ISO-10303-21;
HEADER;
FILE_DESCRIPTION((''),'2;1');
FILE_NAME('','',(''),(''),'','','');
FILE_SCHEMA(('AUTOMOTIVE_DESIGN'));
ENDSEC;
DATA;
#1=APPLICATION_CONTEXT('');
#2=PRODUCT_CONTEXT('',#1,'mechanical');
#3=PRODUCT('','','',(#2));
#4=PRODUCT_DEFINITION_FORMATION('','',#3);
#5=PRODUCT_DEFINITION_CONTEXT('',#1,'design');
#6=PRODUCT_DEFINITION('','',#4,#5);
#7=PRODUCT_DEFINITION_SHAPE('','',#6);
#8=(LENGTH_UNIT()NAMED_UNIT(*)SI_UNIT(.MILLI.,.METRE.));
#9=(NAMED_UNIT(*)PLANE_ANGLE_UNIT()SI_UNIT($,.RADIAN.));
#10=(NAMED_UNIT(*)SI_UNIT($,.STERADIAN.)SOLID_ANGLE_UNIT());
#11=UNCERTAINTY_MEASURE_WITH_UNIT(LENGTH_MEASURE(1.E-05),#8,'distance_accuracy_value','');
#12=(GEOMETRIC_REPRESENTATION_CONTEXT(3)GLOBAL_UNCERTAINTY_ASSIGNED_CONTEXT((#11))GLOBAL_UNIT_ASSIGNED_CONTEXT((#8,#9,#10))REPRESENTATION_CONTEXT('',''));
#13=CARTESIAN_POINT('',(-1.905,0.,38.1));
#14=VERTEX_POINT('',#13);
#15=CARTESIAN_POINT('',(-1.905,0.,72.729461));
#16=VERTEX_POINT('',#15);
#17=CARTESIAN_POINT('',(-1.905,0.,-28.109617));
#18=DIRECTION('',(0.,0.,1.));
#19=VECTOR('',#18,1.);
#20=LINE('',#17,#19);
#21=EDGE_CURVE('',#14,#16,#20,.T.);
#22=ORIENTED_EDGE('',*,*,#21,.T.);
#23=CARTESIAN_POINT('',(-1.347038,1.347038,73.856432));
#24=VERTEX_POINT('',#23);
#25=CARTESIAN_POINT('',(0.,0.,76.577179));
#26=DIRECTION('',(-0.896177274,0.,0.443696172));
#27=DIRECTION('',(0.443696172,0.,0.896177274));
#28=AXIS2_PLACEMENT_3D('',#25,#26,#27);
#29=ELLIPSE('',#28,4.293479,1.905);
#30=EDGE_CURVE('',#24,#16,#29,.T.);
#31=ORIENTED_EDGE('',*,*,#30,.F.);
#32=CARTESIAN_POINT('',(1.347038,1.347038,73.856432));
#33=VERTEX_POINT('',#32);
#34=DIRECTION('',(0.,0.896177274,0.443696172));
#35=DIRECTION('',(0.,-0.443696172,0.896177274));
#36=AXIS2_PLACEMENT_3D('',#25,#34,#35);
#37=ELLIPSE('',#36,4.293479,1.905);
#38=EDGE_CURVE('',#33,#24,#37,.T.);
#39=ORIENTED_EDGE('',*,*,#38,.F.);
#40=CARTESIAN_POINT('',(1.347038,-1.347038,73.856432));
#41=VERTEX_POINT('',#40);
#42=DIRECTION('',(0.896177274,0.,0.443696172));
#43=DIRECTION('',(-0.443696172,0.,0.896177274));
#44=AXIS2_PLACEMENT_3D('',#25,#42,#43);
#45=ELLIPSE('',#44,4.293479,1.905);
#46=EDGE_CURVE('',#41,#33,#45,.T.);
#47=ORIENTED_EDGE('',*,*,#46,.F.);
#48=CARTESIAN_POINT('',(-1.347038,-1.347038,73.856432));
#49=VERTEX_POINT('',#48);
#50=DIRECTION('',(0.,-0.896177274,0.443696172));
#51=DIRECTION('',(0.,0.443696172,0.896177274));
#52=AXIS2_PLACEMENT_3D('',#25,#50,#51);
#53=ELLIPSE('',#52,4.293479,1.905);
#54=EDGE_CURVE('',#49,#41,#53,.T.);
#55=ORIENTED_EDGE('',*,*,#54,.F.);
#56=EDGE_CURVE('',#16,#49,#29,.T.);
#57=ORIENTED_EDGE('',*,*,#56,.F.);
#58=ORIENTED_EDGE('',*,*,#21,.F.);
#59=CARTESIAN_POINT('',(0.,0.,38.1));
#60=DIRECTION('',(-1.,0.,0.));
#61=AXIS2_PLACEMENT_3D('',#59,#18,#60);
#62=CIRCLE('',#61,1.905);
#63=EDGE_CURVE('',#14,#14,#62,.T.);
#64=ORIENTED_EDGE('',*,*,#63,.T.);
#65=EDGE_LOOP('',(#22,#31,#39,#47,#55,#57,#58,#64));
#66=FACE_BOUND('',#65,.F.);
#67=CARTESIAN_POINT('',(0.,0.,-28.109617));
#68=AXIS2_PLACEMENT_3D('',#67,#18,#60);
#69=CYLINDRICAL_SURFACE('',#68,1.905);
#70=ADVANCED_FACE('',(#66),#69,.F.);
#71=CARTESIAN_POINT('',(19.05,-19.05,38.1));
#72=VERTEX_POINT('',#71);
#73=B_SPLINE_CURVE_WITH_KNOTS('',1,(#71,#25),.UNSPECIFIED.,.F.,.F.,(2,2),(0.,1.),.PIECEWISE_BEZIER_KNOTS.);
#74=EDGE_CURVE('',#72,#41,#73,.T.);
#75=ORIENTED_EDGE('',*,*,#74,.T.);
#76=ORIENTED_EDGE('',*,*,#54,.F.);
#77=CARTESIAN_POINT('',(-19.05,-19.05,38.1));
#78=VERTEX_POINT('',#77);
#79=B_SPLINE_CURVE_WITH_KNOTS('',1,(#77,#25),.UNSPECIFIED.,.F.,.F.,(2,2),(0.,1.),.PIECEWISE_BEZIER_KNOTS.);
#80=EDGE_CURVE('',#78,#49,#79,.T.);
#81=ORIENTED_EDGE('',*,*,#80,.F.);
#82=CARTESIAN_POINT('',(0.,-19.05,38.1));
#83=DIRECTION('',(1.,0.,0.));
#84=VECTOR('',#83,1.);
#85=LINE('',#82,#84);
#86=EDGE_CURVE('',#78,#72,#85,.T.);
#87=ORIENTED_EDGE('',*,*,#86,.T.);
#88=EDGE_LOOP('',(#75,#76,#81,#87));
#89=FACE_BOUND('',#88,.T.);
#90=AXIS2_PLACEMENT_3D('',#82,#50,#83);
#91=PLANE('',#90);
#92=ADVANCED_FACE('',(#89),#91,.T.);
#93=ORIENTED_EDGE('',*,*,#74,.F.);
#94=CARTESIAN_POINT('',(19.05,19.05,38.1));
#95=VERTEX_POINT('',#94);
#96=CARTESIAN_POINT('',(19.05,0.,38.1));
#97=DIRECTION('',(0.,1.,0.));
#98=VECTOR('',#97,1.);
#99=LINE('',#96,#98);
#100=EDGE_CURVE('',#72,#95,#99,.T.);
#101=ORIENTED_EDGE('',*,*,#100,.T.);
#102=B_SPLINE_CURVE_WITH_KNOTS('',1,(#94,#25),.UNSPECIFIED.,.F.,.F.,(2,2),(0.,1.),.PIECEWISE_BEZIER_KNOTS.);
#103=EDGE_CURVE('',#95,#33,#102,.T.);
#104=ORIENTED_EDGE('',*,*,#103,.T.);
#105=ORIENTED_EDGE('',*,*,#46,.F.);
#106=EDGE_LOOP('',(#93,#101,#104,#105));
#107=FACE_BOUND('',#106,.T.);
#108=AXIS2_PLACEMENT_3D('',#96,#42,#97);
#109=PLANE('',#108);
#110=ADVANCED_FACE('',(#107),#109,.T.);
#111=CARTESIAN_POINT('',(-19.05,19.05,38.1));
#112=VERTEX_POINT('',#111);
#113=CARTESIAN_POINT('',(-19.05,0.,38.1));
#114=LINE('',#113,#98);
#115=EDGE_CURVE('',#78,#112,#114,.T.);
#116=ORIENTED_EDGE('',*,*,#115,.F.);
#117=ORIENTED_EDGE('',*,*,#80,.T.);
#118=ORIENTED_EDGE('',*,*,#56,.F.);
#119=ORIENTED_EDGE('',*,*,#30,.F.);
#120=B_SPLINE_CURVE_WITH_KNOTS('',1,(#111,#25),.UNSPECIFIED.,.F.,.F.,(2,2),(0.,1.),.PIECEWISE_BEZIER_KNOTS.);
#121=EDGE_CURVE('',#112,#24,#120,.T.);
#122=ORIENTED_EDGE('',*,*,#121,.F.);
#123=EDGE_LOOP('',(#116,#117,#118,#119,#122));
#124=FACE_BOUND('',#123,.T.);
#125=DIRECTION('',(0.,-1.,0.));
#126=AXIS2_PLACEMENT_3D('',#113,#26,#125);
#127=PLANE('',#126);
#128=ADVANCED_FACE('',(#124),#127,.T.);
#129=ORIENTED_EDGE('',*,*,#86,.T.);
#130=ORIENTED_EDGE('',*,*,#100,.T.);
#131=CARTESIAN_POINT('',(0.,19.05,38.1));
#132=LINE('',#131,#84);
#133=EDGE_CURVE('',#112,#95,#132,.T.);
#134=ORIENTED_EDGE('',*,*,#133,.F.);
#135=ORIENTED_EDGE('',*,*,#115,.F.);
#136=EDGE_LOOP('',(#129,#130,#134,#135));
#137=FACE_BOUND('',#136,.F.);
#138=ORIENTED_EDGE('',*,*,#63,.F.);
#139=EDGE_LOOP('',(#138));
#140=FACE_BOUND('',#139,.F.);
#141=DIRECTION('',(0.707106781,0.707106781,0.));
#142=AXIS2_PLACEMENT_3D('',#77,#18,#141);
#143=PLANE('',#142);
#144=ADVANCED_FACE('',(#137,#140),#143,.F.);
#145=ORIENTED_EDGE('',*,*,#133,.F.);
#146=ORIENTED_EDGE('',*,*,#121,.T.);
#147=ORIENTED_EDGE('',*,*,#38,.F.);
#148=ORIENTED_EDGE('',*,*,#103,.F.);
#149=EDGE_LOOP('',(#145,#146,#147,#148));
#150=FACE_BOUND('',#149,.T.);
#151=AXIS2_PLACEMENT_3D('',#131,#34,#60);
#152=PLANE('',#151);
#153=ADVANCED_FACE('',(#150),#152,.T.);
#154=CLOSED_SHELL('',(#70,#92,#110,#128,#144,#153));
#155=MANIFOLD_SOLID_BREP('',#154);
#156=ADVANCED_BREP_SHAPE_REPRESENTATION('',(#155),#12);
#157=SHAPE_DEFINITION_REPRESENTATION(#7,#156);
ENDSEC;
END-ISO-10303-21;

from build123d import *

# Parameters (mm, degrees)
F0_W  = 76.2
F0_H  = 76.2
F2_W  = 38.1
F2_H  = 38.1
F4_W  = 38.1
F4_H  = 38.1
F8_D  = 3.81
F10_D = 3.81


with BuildPart() as f3:
    # F0 (on Top) → F3 section 0
    with BuildSketch(Plane.XY):
        Rectangle(F0_W, F0_H)
    # F2 (on offset) → F3 section 1
    with BuildSketch(Plane.XY.offset(38.1)):
        Rectangle(F2_W, F2_H)
    loft()

    # F10 (through all)
    with Locations(Plane.XY.offset(38.1)):
        with Locations((0, 0)):
            Hole(F10_D / 2)


with BuildPart() as f6:
    # F4 (on offset) → F6 section 0
    with BuildSketch(Plane.XY.offset(38.1), mode=Mode.PRIVATE) as f6_s0:
        Rectangle(F4_W, F4_H)
    loft([f6_s0.sketch, Vertex(0, 0, 76.5771791339)])

    # F8 (through all)
    with Locations(Plane(origin=(0, 0, 38.1), x_dir=(1, 0, 0), z_dir=(0, 0, -1))):
        with Locations((0, 0)):
            Hole(F8_D / 2)


solid = f6.part
